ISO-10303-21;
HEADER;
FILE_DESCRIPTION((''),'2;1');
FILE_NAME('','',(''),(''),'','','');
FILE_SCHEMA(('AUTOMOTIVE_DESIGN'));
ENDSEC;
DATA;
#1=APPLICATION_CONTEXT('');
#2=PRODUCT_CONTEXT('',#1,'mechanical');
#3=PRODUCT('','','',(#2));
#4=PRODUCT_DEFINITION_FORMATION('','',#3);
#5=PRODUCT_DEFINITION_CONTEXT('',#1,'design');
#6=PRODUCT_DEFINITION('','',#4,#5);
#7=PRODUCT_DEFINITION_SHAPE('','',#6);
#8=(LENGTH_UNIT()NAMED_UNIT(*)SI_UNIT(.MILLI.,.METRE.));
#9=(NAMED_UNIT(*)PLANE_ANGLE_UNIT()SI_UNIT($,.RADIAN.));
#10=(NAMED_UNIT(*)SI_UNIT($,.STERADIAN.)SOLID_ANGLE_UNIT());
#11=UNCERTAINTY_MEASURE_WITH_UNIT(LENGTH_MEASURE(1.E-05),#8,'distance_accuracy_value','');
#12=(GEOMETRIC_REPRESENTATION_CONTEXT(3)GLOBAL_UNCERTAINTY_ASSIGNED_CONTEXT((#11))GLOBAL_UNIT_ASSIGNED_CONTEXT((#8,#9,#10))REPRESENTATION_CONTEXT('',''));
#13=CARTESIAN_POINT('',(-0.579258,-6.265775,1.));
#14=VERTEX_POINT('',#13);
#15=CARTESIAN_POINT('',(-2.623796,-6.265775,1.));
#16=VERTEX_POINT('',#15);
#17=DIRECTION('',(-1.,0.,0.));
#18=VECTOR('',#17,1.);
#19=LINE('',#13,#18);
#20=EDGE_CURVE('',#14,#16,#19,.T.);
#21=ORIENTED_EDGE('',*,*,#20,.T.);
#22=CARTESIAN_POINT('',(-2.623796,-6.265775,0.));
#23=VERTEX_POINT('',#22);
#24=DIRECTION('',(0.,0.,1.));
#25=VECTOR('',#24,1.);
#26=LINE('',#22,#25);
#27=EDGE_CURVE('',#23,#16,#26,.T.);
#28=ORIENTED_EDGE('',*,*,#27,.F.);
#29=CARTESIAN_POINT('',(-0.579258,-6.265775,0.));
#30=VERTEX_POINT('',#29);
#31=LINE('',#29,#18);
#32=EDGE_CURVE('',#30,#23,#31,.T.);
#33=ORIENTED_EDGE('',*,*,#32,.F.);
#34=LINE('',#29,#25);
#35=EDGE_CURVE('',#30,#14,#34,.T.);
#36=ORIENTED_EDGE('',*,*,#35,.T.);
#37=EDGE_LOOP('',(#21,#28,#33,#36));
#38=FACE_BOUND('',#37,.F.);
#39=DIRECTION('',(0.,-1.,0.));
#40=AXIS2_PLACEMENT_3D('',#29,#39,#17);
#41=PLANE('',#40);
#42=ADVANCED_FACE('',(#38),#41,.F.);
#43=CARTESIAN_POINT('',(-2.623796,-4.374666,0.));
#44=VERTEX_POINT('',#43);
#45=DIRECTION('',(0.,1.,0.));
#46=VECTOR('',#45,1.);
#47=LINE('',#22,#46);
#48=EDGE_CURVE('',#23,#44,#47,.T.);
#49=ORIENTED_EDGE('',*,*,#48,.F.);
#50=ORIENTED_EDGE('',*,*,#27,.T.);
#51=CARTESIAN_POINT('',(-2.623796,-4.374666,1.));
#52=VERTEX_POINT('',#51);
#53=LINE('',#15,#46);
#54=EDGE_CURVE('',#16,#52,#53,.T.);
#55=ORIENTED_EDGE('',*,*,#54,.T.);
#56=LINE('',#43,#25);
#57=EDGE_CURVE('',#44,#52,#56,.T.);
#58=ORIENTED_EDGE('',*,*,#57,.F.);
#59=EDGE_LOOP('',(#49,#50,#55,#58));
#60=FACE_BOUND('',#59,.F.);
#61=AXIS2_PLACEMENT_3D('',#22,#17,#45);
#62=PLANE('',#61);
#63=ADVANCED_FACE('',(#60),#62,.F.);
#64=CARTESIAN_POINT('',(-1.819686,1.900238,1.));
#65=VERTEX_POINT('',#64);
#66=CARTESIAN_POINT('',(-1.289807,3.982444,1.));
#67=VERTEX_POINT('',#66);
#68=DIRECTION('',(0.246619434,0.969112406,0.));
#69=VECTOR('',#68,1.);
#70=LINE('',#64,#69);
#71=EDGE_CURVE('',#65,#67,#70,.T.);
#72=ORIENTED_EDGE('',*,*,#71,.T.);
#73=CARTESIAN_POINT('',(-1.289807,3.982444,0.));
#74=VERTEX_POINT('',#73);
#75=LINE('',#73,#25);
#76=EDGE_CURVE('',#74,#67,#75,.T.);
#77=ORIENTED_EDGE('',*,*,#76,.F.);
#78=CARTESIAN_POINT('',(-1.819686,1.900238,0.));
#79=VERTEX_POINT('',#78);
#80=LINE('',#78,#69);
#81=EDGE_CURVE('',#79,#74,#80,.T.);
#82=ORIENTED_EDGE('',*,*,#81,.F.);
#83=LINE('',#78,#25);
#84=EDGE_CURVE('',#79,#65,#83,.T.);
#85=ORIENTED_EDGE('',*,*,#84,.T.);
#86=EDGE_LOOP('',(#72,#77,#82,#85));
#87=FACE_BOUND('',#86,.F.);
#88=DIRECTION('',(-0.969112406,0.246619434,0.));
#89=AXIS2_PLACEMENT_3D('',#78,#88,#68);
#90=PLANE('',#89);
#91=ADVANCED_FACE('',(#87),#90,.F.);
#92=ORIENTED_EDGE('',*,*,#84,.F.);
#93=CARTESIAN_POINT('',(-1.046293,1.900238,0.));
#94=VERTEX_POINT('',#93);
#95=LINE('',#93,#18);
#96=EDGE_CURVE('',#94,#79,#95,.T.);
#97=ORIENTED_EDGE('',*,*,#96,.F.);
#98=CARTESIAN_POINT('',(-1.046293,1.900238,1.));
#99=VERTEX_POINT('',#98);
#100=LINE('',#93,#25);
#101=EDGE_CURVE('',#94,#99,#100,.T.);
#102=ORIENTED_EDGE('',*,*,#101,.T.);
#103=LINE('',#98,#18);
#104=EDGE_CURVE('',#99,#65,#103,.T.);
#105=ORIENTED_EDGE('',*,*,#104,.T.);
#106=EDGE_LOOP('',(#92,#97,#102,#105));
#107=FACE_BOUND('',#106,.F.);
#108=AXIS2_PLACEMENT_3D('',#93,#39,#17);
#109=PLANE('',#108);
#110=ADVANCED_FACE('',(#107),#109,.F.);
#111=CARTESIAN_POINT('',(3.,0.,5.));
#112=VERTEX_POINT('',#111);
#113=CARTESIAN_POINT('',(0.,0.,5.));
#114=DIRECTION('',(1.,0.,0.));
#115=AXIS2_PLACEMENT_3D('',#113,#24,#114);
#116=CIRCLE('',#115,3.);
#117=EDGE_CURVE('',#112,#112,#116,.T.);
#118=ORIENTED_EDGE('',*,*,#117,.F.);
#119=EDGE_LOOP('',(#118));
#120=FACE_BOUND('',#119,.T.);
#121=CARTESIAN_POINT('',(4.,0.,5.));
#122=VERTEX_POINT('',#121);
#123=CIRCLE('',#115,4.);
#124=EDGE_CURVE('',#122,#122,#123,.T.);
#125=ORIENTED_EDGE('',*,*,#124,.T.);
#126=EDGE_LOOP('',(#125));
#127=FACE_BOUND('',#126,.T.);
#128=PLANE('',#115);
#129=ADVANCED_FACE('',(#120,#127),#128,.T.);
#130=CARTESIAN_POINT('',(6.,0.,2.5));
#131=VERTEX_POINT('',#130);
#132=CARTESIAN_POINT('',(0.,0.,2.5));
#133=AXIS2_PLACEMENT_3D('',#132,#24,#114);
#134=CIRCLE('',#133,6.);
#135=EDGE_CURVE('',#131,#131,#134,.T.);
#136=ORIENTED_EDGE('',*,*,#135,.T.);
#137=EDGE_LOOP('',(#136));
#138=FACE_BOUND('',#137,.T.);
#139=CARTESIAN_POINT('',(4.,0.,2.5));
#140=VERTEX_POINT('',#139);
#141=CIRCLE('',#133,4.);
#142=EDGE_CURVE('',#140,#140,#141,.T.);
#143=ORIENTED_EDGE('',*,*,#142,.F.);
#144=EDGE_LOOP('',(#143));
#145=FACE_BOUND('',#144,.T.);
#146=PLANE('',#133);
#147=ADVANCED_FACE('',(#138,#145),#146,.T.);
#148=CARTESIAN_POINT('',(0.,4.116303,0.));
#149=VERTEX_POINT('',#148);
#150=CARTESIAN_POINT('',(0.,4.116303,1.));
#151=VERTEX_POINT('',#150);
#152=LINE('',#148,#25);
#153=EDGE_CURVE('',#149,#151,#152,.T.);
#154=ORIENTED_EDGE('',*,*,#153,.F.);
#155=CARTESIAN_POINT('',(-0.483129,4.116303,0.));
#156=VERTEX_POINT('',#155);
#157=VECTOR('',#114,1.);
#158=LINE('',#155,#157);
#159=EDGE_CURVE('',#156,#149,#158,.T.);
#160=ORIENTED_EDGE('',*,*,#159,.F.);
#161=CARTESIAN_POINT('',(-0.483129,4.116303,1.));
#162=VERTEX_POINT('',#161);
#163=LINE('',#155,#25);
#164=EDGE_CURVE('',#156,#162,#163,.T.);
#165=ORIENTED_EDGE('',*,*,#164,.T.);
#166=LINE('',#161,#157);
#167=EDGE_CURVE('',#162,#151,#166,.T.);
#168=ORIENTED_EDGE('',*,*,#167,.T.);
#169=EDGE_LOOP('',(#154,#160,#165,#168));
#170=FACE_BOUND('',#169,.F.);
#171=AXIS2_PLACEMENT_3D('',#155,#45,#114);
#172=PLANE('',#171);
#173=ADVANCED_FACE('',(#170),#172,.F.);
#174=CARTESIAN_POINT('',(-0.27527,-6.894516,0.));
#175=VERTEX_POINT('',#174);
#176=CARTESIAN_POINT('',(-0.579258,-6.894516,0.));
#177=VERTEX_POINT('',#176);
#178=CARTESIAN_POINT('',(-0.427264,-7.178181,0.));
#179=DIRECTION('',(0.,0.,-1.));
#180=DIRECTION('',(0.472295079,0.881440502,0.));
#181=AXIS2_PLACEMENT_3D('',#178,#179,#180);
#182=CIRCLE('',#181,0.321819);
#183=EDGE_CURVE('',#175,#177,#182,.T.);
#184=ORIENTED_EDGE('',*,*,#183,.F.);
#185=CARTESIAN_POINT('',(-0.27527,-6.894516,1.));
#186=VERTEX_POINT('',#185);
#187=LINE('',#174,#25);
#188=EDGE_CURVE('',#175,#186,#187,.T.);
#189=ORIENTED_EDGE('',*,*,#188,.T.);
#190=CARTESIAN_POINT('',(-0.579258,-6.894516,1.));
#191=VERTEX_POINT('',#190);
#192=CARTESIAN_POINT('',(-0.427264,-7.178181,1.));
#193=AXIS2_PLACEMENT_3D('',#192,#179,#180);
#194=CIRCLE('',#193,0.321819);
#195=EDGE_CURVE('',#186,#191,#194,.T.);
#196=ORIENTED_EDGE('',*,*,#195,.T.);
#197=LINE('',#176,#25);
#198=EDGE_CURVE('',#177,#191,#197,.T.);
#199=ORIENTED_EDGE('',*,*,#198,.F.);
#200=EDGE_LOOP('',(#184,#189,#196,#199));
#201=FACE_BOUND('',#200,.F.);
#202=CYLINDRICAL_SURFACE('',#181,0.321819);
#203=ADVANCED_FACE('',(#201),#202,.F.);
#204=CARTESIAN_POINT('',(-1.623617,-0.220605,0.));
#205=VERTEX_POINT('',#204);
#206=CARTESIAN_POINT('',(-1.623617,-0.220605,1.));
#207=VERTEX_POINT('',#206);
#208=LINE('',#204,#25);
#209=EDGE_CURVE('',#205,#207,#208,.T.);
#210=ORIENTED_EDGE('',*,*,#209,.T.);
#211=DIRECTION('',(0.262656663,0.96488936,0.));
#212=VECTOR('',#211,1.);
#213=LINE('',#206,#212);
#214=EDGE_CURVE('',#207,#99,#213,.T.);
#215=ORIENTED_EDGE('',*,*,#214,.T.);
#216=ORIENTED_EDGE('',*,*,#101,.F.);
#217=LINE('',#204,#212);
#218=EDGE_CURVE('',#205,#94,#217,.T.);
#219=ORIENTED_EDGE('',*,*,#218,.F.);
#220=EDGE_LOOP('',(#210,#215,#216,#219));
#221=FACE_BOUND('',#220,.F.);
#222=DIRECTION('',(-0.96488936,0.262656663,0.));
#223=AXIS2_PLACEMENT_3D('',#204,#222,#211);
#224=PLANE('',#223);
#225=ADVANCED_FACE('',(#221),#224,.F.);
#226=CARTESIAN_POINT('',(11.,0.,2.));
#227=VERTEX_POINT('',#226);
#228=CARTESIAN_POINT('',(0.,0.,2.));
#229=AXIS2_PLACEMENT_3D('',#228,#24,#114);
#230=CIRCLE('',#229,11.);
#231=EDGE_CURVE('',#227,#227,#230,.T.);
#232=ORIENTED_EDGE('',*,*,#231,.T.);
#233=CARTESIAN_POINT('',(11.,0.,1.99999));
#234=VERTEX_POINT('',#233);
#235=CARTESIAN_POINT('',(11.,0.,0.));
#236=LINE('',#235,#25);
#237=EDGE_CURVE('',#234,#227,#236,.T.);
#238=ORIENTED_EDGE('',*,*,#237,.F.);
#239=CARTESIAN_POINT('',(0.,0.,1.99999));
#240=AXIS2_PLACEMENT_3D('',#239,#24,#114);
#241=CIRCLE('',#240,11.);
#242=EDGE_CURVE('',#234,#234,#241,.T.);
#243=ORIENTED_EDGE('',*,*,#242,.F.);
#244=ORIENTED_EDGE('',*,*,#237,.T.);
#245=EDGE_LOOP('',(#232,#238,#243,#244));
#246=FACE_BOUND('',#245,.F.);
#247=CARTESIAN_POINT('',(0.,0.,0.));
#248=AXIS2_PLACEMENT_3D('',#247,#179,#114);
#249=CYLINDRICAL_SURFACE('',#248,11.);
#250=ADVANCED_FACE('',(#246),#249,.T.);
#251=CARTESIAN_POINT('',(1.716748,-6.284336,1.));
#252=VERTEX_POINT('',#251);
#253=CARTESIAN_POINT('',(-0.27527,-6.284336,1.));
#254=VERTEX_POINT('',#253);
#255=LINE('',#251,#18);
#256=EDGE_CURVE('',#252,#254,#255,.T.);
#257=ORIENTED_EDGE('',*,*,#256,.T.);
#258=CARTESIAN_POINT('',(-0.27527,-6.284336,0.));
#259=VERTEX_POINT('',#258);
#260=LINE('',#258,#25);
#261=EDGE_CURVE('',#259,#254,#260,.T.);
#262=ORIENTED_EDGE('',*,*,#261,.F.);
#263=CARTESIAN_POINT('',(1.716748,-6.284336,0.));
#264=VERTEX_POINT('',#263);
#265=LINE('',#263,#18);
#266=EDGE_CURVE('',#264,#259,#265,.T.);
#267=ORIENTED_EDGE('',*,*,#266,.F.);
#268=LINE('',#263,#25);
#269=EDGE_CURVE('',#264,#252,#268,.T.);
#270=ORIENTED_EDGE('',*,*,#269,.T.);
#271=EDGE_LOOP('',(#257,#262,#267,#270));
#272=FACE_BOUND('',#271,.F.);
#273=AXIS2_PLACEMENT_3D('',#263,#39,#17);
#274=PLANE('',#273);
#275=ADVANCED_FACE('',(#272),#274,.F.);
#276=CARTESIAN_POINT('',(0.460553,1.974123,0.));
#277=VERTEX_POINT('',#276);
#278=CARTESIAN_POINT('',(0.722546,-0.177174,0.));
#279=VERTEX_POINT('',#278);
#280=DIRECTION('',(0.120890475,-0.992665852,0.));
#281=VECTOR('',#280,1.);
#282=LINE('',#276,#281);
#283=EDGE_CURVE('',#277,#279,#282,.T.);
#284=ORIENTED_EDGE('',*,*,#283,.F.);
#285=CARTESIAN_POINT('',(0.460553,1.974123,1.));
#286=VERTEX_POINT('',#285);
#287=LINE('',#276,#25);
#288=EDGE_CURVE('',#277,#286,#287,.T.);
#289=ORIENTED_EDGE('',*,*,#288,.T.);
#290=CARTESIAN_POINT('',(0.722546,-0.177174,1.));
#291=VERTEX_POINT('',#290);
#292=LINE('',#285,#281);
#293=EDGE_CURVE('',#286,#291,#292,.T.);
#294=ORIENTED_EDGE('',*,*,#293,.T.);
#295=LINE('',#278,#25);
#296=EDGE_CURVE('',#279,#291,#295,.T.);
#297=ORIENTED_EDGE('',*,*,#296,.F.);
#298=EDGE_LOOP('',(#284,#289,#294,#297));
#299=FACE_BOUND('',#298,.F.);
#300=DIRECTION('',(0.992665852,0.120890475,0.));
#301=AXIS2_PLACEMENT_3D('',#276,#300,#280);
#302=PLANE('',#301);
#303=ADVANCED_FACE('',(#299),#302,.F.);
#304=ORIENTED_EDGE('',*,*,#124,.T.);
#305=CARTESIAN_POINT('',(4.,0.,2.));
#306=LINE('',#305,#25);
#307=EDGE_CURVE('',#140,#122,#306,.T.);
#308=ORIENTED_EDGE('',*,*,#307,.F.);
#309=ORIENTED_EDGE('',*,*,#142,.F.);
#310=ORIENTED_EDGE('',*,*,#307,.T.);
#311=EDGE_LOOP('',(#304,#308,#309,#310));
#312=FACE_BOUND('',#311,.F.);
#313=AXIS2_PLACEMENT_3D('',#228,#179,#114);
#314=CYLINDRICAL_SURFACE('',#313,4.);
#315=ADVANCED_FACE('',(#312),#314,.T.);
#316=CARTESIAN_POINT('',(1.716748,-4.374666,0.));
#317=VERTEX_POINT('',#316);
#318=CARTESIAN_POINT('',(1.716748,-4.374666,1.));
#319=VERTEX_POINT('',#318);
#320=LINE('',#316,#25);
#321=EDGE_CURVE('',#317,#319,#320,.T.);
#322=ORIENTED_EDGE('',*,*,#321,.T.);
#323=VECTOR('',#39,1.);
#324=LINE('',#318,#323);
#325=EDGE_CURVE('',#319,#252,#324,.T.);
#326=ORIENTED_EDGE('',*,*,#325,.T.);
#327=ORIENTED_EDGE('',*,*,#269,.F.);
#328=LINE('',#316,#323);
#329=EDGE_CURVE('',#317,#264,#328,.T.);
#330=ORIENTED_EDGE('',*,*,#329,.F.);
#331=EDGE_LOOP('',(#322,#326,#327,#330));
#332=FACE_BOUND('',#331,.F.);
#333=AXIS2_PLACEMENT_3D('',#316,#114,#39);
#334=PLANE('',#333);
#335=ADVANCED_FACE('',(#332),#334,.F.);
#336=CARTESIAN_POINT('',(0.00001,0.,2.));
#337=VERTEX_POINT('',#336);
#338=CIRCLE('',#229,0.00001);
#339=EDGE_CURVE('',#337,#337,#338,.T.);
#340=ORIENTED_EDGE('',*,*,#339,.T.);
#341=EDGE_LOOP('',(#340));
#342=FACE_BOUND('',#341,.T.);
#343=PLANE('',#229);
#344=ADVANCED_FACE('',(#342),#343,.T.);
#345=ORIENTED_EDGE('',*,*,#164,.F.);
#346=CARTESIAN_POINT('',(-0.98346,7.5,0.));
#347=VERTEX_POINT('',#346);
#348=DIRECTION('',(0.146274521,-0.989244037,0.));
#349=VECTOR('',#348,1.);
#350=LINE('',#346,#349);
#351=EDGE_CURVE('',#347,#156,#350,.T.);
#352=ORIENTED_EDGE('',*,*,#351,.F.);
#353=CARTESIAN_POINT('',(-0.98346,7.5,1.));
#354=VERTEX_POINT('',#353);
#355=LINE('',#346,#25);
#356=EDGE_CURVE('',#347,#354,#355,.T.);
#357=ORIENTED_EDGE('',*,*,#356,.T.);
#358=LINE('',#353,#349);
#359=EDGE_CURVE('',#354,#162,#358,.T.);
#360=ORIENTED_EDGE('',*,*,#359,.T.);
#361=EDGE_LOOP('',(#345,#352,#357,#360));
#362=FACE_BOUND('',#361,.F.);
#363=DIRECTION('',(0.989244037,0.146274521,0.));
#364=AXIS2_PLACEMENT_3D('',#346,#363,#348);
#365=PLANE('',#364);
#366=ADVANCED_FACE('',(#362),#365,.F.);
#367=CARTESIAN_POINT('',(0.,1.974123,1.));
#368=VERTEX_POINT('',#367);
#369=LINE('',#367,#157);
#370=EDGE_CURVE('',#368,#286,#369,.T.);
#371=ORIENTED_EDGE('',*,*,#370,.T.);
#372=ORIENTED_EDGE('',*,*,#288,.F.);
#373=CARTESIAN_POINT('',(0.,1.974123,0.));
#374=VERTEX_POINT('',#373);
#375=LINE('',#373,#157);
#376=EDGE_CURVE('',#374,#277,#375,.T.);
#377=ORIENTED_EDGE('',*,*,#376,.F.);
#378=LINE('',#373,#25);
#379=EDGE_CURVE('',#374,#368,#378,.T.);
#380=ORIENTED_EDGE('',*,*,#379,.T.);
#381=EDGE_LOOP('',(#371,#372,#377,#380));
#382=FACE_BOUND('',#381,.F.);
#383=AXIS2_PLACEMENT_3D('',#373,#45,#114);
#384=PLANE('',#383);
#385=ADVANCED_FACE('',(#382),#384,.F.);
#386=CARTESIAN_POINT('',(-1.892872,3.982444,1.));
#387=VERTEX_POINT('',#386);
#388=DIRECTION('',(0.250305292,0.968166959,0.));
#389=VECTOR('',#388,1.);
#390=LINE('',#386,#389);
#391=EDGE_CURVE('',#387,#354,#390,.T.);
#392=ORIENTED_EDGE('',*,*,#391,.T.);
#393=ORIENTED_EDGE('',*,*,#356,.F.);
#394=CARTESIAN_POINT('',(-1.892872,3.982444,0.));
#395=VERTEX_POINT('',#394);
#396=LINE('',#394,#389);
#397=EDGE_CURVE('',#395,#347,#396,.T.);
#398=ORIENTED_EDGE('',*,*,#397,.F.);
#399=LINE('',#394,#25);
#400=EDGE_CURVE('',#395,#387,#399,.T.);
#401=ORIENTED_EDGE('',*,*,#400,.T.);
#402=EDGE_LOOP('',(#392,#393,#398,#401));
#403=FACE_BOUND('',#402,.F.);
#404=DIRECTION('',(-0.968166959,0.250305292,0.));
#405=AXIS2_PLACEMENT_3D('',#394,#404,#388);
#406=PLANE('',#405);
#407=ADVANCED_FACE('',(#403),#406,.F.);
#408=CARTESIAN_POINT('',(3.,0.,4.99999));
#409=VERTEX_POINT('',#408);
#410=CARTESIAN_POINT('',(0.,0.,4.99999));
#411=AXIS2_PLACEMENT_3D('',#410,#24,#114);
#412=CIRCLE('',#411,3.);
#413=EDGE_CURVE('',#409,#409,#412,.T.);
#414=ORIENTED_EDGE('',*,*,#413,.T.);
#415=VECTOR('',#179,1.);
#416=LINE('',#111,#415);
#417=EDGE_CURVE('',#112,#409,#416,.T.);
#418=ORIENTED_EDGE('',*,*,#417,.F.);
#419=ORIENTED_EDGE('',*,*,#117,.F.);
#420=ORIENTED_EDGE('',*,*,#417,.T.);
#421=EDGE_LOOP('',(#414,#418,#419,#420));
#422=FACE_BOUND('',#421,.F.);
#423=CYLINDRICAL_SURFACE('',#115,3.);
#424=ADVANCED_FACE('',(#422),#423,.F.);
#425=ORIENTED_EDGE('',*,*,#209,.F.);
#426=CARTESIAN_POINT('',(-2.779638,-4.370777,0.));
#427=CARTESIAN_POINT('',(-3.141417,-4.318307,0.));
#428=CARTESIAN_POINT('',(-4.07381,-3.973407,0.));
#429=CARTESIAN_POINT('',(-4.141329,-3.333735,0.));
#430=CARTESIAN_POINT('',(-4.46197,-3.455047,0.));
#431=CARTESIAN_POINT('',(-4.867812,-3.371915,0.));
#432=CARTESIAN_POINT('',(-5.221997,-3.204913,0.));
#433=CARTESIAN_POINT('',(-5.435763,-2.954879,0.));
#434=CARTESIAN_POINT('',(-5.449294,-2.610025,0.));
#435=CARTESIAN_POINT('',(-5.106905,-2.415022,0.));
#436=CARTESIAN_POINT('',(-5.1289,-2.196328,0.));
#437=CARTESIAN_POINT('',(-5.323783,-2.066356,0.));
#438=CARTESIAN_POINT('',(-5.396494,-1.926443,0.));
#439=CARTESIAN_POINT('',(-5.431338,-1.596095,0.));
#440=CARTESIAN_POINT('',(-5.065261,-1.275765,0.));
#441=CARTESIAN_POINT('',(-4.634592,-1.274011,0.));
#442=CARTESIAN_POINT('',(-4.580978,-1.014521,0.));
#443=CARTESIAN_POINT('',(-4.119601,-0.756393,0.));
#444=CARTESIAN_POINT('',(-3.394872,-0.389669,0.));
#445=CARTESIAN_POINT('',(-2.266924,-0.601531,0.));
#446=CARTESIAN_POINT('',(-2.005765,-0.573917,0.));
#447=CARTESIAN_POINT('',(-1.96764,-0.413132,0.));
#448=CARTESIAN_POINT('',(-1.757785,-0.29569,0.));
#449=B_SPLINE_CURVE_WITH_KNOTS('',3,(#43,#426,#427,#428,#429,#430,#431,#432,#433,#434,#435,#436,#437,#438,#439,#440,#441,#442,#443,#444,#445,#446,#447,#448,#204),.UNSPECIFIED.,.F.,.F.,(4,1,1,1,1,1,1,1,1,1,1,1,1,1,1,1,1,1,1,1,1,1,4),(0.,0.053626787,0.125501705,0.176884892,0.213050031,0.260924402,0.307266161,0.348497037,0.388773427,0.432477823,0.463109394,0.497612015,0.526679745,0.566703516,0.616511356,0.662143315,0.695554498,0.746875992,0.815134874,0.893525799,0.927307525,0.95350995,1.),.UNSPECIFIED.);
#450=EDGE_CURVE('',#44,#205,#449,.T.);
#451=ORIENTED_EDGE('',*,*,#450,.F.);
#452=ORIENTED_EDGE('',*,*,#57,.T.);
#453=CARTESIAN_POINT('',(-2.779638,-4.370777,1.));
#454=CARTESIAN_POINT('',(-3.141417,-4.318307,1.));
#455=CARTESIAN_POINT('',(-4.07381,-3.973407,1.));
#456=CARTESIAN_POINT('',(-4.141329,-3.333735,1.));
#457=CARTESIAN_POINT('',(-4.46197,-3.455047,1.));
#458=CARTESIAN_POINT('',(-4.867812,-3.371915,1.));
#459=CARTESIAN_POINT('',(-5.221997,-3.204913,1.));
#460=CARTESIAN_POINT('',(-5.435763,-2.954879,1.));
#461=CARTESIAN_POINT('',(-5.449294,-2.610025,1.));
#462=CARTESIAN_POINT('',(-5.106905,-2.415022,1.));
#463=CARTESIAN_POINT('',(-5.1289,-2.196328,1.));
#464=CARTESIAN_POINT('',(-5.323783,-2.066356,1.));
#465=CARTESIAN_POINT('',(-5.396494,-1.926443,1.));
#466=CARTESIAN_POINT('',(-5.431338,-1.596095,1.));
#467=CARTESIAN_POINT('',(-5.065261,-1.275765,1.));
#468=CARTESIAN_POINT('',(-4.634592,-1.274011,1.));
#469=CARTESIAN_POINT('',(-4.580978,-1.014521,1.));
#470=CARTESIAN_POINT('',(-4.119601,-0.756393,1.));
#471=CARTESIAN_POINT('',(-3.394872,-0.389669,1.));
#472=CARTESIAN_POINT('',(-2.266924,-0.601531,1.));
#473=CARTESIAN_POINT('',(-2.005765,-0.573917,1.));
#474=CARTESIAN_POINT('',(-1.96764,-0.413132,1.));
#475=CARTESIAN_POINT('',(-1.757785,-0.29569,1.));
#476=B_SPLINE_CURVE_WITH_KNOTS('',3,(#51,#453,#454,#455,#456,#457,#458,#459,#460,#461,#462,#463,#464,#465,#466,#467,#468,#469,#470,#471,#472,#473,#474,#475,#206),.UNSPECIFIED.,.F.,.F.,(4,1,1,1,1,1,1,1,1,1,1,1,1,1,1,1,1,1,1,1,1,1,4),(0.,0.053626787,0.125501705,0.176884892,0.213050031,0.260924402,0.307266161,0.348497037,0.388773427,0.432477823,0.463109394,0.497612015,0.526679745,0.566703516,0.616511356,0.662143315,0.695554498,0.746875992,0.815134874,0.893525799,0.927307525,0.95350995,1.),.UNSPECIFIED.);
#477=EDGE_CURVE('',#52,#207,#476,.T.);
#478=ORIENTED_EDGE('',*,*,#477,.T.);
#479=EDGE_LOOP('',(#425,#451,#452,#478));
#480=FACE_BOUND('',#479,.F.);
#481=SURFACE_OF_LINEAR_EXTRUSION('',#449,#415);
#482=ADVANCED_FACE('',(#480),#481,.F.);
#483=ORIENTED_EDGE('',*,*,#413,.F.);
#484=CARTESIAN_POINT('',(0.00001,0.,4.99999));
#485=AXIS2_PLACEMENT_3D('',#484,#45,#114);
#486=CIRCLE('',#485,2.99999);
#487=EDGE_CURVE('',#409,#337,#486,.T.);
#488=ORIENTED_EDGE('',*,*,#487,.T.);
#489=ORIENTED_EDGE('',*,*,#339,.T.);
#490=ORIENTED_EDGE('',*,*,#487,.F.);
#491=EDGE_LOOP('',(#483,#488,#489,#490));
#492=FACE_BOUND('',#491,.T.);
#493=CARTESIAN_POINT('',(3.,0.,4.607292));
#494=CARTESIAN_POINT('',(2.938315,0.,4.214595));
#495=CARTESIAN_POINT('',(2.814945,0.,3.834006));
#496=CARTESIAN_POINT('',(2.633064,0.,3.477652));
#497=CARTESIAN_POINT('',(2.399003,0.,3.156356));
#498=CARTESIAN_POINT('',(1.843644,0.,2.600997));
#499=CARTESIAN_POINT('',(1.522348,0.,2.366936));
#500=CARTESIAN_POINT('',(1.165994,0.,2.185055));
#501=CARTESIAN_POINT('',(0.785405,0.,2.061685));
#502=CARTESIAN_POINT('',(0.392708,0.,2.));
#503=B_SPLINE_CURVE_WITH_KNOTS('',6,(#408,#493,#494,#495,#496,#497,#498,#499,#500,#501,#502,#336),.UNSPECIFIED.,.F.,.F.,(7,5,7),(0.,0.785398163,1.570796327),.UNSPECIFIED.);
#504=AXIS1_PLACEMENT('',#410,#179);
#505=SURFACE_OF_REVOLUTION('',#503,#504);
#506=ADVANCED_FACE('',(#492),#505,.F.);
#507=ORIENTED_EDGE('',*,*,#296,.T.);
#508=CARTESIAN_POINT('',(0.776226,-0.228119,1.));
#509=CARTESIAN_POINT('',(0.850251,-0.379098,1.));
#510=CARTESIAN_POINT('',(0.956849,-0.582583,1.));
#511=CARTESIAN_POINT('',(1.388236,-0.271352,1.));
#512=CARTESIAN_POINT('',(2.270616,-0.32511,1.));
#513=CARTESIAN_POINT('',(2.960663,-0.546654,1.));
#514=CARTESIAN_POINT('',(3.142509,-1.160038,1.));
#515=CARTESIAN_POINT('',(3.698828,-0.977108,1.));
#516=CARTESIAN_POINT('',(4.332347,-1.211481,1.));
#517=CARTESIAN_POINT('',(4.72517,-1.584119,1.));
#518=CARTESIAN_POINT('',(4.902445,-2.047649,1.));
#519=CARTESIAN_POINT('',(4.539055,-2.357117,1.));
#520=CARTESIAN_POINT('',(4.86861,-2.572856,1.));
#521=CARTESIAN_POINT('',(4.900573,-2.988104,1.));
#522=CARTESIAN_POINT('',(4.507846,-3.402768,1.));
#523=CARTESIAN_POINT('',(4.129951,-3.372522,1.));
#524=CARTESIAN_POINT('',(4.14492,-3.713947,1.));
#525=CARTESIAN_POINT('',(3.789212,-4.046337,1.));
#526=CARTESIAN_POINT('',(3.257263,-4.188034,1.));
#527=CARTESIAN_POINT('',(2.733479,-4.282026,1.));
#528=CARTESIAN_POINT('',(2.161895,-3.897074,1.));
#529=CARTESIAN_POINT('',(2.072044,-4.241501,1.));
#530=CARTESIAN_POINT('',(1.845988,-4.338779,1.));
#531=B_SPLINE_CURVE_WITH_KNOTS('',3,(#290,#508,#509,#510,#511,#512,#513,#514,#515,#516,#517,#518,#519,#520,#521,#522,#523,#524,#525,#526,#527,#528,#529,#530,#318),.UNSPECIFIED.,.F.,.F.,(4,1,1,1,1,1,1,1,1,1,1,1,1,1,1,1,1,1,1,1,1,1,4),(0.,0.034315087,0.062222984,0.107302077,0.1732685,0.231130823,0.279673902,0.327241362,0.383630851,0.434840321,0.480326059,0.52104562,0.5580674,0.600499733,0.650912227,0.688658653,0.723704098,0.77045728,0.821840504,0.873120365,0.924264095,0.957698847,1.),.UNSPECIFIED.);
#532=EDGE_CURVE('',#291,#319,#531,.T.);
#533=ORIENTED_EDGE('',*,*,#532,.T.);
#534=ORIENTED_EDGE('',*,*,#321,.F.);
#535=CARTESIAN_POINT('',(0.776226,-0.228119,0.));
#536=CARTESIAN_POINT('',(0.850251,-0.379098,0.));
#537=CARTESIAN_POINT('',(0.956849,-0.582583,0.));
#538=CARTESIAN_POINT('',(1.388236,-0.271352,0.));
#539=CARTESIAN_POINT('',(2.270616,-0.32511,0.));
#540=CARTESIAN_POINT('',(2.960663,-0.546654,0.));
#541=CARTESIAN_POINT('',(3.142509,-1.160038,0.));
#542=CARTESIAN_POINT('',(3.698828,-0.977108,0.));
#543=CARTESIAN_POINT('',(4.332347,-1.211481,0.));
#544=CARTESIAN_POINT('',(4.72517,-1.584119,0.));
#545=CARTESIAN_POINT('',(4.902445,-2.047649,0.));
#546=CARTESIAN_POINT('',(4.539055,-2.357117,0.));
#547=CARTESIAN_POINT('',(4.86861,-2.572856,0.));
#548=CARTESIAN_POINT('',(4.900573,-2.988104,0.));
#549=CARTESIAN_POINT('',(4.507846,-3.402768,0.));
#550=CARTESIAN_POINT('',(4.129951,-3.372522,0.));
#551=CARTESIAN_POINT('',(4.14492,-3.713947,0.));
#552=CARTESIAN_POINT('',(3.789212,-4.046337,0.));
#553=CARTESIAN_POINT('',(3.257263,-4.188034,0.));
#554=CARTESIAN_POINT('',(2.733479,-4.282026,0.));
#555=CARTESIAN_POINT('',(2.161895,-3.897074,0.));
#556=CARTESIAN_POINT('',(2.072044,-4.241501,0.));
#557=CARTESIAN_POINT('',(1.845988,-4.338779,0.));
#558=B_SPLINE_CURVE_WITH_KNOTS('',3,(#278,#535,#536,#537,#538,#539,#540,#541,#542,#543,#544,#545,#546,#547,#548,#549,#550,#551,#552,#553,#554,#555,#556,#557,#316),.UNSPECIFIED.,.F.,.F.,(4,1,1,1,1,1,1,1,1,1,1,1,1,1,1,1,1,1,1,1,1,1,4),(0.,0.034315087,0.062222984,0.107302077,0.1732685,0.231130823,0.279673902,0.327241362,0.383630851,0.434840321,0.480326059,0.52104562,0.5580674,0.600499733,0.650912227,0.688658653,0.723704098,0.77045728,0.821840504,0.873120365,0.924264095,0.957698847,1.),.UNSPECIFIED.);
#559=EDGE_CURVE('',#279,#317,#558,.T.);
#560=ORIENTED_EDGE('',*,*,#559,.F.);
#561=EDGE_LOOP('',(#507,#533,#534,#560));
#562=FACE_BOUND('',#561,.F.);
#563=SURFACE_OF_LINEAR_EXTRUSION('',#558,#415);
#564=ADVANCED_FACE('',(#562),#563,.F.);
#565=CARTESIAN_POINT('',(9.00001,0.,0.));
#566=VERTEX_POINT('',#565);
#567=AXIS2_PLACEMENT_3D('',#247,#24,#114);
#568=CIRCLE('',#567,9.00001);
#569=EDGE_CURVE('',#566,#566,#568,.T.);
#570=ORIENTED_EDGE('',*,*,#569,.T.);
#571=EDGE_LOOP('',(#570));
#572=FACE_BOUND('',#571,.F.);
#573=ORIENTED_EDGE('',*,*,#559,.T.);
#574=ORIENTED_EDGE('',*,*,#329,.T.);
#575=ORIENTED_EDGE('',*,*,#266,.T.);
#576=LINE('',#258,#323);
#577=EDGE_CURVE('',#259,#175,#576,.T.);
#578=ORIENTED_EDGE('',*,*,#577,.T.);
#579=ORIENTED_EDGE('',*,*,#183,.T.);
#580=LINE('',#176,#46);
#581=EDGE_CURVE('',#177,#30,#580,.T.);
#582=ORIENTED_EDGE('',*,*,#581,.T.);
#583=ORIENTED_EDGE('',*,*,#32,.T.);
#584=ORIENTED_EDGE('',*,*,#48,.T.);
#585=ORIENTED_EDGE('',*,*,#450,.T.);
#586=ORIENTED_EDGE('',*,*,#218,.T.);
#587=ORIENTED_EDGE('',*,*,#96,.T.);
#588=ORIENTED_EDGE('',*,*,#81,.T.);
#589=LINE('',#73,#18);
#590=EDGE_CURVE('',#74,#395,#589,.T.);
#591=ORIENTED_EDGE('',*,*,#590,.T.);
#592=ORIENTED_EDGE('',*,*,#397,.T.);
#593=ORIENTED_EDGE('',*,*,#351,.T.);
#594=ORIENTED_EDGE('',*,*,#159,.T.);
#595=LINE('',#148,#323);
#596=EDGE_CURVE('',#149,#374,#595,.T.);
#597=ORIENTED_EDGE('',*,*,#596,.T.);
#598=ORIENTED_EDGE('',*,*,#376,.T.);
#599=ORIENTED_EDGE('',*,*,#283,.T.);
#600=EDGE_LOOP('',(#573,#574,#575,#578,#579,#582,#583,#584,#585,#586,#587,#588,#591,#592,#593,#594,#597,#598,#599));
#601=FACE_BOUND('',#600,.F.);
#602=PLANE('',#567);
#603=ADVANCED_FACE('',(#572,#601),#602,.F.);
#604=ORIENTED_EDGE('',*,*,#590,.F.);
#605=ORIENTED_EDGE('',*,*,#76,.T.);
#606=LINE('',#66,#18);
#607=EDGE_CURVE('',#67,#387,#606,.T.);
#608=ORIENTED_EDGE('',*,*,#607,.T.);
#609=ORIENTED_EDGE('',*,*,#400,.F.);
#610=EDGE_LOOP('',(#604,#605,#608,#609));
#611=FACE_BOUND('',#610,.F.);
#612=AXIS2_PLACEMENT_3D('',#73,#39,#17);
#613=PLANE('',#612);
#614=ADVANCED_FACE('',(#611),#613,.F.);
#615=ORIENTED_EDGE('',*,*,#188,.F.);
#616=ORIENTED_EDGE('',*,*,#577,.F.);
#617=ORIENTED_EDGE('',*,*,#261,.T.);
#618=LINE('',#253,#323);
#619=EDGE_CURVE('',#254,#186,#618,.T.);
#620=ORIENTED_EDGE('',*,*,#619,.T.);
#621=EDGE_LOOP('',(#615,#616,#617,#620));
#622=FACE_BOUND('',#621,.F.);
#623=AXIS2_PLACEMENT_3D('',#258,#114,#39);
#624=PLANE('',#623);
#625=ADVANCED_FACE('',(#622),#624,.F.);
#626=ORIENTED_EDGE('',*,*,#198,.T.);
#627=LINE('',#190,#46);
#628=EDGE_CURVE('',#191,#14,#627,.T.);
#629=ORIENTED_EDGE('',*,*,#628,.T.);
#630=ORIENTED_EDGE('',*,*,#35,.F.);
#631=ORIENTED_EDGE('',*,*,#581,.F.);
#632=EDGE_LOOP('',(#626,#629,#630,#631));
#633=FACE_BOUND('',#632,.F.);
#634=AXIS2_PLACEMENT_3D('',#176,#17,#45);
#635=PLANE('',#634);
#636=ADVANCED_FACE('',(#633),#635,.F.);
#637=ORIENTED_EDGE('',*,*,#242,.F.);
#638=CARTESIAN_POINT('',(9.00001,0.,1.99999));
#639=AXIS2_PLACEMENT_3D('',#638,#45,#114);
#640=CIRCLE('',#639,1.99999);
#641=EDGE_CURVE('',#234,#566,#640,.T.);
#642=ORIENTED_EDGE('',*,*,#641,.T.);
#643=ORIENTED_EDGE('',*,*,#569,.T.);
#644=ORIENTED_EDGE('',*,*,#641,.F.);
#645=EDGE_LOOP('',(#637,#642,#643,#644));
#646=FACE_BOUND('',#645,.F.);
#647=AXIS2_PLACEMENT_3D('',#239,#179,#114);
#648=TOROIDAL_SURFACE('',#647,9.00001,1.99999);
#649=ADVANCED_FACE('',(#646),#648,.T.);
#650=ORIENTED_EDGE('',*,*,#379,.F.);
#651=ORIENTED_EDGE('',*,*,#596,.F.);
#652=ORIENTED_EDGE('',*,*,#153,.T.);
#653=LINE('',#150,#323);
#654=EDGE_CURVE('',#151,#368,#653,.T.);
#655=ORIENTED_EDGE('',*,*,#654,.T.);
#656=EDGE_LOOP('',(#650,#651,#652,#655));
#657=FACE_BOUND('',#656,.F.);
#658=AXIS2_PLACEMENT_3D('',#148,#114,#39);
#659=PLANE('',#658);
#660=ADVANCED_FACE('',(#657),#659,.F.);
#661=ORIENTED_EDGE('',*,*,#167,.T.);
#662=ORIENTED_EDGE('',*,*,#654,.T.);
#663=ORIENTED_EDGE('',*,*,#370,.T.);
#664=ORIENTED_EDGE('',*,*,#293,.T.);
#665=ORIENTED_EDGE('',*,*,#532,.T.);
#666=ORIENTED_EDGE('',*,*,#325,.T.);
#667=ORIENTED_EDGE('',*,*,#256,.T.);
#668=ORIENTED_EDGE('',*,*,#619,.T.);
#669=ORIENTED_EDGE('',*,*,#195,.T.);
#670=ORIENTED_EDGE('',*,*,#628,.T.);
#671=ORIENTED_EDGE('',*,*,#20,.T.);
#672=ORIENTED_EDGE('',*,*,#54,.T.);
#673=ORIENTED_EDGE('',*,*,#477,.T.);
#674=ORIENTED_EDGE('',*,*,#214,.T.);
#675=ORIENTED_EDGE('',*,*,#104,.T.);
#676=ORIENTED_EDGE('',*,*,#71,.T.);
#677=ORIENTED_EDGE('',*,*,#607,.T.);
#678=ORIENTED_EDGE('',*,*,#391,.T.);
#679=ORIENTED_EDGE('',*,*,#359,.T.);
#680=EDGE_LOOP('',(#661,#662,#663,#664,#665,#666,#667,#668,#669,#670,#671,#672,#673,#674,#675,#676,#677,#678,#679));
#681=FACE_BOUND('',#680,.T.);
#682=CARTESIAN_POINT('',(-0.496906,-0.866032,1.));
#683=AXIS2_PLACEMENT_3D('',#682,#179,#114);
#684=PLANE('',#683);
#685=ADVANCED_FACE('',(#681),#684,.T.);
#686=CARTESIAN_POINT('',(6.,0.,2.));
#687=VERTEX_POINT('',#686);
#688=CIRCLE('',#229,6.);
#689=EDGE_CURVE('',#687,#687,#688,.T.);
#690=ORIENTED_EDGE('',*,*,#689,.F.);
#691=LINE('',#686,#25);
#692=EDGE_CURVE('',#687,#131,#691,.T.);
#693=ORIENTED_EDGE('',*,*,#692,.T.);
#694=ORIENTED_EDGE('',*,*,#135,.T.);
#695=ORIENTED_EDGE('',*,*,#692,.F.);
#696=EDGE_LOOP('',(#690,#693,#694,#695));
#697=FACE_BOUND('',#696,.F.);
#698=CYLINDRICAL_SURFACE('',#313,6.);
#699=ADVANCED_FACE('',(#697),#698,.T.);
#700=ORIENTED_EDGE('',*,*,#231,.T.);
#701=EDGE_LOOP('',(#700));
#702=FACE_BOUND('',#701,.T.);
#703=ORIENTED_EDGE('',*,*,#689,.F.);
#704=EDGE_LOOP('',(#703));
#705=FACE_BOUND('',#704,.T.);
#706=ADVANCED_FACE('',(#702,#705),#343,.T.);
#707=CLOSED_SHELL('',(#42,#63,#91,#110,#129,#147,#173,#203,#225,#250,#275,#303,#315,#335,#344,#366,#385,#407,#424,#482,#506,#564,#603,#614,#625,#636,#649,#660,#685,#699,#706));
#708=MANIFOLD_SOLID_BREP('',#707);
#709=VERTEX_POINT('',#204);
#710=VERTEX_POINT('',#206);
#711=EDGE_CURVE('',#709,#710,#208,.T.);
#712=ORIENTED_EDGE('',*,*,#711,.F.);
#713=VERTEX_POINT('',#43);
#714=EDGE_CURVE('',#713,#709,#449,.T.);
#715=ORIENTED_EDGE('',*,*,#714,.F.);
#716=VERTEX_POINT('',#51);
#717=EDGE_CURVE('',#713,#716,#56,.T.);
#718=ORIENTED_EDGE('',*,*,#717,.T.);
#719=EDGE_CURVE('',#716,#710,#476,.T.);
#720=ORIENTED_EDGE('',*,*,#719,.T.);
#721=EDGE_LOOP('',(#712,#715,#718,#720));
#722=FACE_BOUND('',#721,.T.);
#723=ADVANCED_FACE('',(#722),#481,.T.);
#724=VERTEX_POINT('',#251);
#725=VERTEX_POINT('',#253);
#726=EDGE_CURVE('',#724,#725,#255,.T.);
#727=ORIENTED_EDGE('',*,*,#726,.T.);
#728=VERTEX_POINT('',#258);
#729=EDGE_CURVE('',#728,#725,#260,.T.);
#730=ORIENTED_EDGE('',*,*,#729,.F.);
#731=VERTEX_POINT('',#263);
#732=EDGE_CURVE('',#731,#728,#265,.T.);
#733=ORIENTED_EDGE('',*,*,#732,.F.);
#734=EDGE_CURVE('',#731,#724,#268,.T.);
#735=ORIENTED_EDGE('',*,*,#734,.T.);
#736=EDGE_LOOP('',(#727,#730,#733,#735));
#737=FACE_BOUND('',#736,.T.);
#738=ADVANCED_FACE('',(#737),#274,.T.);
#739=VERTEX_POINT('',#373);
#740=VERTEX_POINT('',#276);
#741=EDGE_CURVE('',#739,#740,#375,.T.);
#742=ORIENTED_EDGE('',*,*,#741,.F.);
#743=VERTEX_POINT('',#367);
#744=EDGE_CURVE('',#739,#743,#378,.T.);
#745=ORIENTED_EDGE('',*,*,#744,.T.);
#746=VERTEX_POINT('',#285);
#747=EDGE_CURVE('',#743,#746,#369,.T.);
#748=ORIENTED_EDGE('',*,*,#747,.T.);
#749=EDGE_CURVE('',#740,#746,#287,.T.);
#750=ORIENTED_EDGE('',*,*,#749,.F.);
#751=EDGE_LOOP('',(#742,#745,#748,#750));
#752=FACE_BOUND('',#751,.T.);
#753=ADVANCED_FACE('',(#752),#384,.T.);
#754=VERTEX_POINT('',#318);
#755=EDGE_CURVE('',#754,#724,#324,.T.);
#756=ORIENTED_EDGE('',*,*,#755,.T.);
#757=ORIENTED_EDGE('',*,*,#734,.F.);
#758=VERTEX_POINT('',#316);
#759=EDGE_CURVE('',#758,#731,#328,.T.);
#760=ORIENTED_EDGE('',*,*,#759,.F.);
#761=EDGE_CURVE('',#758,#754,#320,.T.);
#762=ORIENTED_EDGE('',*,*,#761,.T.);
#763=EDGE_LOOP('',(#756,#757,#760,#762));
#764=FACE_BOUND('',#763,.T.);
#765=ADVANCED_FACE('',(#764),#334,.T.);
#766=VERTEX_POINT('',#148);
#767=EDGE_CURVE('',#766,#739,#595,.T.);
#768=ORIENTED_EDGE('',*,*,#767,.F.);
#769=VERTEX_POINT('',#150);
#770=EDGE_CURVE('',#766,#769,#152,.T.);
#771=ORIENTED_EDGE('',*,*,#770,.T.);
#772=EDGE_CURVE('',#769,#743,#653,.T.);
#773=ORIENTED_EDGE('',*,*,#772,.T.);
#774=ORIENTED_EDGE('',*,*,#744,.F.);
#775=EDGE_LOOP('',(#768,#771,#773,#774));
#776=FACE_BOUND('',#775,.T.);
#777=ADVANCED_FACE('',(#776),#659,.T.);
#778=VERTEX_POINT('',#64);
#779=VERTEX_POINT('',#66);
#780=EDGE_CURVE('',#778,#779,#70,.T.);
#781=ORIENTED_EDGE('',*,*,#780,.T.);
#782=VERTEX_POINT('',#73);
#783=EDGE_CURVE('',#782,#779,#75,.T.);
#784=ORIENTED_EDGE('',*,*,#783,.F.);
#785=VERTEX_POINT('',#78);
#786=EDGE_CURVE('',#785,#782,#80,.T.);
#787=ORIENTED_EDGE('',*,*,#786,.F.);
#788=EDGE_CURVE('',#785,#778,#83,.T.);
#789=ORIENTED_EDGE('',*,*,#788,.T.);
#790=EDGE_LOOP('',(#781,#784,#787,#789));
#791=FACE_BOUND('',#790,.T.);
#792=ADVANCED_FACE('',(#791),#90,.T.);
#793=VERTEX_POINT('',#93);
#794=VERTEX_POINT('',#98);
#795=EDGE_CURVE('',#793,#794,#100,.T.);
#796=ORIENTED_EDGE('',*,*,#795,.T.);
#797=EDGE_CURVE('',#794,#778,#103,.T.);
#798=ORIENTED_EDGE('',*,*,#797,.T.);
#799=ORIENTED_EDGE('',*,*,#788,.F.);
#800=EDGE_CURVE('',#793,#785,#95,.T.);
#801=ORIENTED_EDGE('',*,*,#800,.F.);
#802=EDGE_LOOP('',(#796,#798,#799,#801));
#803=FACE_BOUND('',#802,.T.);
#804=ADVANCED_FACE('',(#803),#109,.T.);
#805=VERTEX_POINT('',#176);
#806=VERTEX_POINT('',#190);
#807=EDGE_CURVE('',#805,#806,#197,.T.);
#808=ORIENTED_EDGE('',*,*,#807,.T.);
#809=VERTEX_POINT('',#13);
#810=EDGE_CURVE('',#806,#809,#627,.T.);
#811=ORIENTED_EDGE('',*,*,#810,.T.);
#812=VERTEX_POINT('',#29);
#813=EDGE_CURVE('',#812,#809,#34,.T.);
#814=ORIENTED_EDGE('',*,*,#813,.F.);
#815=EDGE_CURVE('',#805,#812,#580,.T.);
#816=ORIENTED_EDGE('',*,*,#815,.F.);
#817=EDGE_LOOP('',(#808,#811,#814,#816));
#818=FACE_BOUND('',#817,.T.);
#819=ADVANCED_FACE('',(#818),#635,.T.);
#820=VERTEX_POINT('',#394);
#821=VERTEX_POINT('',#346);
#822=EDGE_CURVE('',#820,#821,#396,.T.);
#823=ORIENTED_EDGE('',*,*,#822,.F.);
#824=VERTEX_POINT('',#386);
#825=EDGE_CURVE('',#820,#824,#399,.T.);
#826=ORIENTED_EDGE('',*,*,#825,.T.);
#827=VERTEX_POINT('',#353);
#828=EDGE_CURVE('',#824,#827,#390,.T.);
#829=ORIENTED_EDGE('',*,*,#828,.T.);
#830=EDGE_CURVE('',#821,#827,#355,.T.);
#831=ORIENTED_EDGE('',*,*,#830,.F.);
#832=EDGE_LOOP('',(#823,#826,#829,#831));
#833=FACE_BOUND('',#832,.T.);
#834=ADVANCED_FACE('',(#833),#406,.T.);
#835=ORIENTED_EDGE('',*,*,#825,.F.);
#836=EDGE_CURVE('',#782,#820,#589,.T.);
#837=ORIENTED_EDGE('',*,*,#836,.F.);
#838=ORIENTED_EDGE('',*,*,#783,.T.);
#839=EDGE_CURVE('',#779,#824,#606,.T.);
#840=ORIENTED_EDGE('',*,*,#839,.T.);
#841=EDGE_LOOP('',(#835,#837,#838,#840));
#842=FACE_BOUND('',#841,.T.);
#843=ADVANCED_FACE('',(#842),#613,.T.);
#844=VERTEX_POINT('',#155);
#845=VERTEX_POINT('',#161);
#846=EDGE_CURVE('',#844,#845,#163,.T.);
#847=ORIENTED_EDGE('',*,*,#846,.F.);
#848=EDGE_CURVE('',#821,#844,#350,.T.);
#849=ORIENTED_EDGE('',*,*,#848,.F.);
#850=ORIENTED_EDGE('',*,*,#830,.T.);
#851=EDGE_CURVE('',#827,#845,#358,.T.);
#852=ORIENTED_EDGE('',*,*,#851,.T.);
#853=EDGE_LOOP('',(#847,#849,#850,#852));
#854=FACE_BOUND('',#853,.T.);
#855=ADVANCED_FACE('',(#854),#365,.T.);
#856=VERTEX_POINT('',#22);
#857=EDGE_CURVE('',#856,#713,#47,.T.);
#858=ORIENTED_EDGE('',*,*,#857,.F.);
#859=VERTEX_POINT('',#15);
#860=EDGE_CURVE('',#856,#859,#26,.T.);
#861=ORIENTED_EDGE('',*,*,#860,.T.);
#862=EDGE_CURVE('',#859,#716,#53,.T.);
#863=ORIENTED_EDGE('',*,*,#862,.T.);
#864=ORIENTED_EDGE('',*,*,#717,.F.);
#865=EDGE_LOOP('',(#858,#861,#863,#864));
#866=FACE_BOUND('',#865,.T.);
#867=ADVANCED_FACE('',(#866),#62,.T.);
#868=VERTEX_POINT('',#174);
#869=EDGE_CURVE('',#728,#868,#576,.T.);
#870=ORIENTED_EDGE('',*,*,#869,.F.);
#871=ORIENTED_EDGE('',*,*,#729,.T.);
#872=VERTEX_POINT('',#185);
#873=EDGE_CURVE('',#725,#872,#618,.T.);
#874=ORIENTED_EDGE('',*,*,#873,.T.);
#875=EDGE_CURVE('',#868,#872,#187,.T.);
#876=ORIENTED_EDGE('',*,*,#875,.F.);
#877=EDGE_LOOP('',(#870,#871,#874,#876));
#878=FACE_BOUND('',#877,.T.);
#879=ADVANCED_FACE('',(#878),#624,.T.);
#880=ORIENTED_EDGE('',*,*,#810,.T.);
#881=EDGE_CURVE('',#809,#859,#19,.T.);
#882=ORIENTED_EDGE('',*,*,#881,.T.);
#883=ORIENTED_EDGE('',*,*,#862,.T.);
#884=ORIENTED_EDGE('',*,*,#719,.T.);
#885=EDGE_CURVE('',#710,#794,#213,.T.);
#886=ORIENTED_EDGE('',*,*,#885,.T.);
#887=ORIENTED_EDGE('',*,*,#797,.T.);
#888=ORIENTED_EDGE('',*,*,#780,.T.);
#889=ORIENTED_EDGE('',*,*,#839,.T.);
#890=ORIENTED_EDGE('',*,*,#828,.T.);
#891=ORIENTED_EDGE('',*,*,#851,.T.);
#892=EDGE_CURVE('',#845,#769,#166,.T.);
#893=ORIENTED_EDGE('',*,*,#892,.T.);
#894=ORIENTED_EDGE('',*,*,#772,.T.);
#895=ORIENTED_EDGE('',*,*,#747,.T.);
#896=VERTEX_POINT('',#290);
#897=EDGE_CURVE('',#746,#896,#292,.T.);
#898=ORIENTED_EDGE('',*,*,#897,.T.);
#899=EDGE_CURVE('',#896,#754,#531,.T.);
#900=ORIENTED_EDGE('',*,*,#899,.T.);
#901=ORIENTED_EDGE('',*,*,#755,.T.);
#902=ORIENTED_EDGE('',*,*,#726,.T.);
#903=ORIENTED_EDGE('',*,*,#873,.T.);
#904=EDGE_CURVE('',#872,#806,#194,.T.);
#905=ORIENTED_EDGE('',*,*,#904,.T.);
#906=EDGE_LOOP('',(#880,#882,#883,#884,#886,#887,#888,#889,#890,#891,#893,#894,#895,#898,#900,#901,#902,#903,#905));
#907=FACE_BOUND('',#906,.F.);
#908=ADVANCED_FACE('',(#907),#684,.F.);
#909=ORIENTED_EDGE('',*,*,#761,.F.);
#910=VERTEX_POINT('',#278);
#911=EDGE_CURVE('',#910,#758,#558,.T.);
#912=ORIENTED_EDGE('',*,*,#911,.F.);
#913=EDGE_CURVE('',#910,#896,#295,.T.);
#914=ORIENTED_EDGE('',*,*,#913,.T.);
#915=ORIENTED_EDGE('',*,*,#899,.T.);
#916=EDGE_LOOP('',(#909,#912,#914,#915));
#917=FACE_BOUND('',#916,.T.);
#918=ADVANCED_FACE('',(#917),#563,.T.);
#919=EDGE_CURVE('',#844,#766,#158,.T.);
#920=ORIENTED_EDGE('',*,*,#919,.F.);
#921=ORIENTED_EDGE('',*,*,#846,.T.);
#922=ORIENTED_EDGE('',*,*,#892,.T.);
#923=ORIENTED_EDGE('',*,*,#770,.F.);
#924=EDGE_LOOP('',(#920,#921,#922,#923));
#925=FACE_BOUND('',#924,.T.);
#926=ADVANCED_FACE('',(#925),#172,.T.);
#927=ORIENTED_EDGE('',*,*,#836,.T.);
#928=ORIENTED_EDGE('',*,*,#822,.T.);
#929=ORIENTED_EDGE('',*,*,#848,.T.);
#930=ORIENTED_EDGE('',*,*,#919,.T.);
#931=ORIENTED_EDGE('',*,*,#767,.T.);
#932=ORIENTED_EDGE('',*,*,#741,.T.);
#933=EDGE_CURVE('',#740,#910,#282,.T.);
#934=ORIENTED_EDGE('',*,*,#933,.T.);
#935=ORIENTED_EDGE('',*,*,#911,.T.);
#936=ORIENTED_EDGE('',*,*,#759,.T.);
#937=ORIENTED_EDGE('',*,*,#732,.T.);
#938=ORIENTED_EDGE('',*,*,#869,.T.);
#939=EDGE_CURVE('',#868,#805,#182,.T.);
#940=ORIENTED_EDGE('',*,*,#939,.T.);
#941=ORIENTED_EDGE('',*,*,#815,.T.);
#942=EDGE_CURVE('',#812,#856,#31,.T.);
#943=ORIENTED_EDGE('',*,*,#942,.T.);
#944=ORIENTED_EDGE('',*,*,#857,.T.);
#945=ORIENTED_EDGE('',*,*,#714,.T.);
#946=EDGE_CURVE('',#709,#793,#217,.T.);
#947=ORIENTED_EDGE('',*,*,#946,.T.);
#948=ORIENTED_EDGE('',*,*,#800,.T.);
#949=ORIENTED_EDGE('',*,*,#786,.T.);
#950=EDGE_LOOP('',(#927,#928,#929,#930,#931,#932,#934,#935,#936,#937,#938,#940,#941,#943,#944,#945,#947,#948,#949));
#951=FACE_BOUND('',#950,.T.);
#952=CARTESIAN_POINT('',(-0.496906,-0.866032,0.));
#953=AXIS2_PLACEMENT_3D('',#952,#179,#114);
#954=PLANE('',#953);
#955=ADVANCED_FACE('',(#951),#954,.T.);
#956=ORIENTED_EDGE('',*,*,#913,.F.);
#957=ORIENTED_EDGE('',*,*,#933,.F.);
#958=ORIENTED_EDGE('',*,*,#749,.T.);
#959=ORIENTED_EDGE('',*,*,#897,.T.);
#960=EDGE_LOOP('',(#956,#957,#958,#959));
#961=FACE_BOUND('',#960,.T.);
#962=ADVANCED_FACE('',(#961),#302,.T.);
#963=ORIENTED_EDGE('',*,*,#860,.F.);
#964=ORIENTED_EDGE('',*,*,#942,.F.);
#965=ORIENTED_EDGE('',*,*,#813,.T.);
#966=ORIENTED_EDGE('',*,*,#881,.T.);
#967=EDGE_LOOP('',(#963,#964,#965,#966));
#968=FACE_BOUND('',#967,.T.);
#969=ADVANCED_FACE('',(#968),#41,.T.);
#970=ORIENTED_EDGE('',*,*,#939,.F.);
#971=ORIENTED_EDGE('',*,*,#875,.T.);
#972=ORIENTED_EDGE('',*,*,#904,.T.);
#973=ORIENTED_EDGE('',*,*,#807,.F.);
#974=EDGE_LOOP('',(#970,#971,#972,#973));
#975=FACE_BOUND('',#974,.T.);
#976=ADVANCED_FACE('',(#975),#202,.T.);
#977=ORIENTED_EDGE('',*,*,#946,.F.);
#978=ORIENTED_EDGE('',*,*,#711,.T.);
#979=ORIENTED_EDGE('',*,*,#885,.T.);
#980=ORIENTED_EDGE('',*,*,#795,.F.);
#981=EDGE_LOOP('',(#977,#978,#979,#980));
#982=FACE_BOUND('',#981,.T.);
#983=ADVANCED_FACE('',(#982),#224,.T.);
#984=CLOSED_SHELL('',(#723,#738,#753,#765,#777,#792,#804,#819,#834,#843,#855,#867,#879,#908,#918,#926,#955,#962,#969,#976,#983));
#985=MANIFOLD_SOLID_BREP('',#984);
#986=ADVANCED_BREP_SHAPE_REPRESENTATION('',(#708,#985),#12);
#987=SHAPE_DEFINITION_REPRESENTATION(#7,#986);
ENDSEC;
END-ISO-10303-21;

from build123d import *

# Parameters (mm, degrees)
F0_R      = 11
F1_DEPTH  = 2
F2_R      = 4
F3_DEPTH  = 3
F4_R      = 1.99999
F6_DEPTH  = 1
F8_R      = 3
F9_DEPTH  = 3
F10_R     = 2.99999
F11_R     = 6
F11_R_2   = 4
F12_DEPTH = 0.5


# Not quite as in the source:
# - a fillet or chamfer is up to 0.001 mm smaller than in the source, because OpenCascade refuses the exact size


with BuildPart() as f1:
    # F0 (on Top) → F1 (new body)
    with BuildSketch(Plane.XY):
        Circle(F0_R)
    extrude(amount=F1_DEPTH)

    # F2 (on face) → F3 (join)
    with BuildSketch(Plane.XY.offset(2)):
        Circle(F2_R)
    extrude(amount=F3_DEPTH)

    # F4 (radius 2 in the source; OpenCascade refuses exactly that, so slightly less here)
    f4_edges = [f1.edges().sort_by_distance(p)[0] for p in [
        (-11, 0, 0),
    ]]
    fillet(f4_edges, radius=F4_R)


with BuildPart() as f6:
    # F5 (on face) → F6 (new body)
    with BuildSketch(Plane(origin=(0, 0, 0), x_dir=(1, 0, 0), z_dir=(0, 0, -1))):
        with BuildLine():
            Line((-1.8928718055, -3.9824442938), (-0.9834596422, -7.5))
            Line((-0.9834596422, -7.5), (-0.4831294937, -4.1163032874))
            Line((-0.4831294937, -4.1163032874), (0, -4.1163032874))
            Line((0, -4.1163032874), (0, -1.9741227152))
            Line((0, -1.9741227152), (0.4605528779, -1.9741227152))
            Line((0.4605528779, -1.9741227152), (0.7225455958, 0.177173526))
            add(Edge.make_bspline(
                [(0.7225455958, 0.177173526), (0.7762262629, 0.2281189128), (0.8502513972, 0.379098319), (0.9568493801, 0.5825831672), (1.3882358596, 0.2713520899), (2.2706158575, 0.325109657), (2.9606627237, 0.5466543673), (3.1425092039, 1.1600376151), (3.6988276955, 0.9771075427), (4.3323473067, 1.21148059), (4.7251701582, 1.5841194333), (4.902445248, 2.0476494201), (4.5390546862, 2.3571166495), (4.868610307, 2.5728562245), (4.9005730312, 2.9881043818), (4.5078459511, 3.402767623), (4.1299512308, 3.3725223179), (4.1449199962, 3.7139472996), (3.7892118892, 4.0463374379), (3.2572627056, 4.1880335908), (2.7334793793, 4.2820261048), (2.1618953926, 3.897074129), (2.0720441471, 4.2415005639), (1.8459876198, 4.3387790504), (1.7167479964, 4.3746663272)],
                knots=[0, 0, 0, 0, 0.034315087, 0.0622229844, 0.1073020773, 0.1732684996, 0.2311308228, 0.279673902, 0.3272413623, 0.3836308507, 0.4348403206, 0.480326059, 0.5210456198, 0.5580673996, 0.6004997328, 0.6509122273, 0.6886586533, 0.7237040981, 0.7704572796, 0.821840504, 0.8731203646, 0.9242640946, 0.9576988474, 1, 1, 1, 1], degree=3))
            Line((1.7167479964, 4.3746663272), (1.7167479964, 6.2843358159))
            Line((1.7167479964, 6.2843358159), (-0.2752703829, 6.2843358159))
            Line((-0.2752703829, 6.2843358159), (-0.2752703829, 6.894516015))
            ThreePointArc((-0.2752703829, 6.894516015), (-0.4272640848, 7.5), (-0.5792577867, 6.894516015))
            Line((-0.5792577867, 6.894516015), (-0.5792577867, 6.2657745569))
            Line((-0.5792577867, 6.2657745569), (-2.6237959974, 6.2657745569))
            Line((-2.6237959974, 6.2657745569), (-2.6237959974, 4.3746663272))
            add(Edge.make_bspline(
                [(-2.6237959974, 4.3746663272), (-2.7796377607, 4.370777365), (-3.1414168436, 4.3183073448), (-4.073810314, 3.973406918), (-4.1413287087, 3.333735406), (-4.4619695731, 3.4550470658), (-4.8678120533, 3.3719150759), (-5.2219971301, 3.2049126023), (-5.4357633862, 2.9548787394), (-5.44929439, 2.6100254951), (-5.106905436, 2.4150215688), (-5.1288996618, 2.1963283303), (-5.3237832819, 2.0663564119), (-5.3964938936, 1.9264425574), (-5.4313375817, 1.5960952954), (-5.0652612539, 1.2757646634), (-4.6345917016, 1.2740107743), (-4.5809776708, 1.0145212389), (-4.1196007189, 0.7563932071), (-3.3948718138, 0.3896693064), (-2.2669242123, 0.6015313813), (-2.0057648306, 0.5739172824), (-1.9676401478, 0.4131318116), (-1.7577845477, 0.2956896244), (-1.6236169031, 0.2206049394)],
                knots=[0, 0, 0, 0, 0.0536267868, 0.125501705, 0.176884892, 0.2130500311, 0.2609244015, 0.3072661614, 0.3484970374, 0.388773427, 0.4324778226, 0.463109394, 0.4976120146, 0.5266797454, 0.5667035162, 0.6165113557, 0.6621433152, 0.6955544981, 0.7468759924, 0.8151348745, 0.8935257992, 0.9273075254, 0.9535099497, 1, 1, 1, 1], degree=3))
            Line((-1.6236169031, 0.2206049394), (-1.0462932987, -1.9002375193))
            Line((-1.0462932987, -1.9002375193), (-1.8196863821, -1.9002375193))
            Line((-1.8196863821, -1.9002375193), (-1.2898070272, -3.9824442938))
            Line((-1.2898070272, -3.9824442938), (-1.8928718055, -3.9824442938))
        make_face()
    extrude(amount=-F6_DEPTH)


with BuildPart() as f1_1:
    add(f1.part)

    # F7: cut F6
    add(f6.part, mode=Mode.SUBTRACT)

    # F8 (on face) → F9 (cut, through all)
    with BuildSketch(Plane.XY.offset(5)):
        Circle(F8_R)
    extrude(amount=-F9_DEPTH, mode=Mode.SUBTRACT)

    # F10 (radius 3 in the source; OpenCascade refuses exactly that, so slightly less here)
    f10_edges = [f1_1.edges().sort_by_distance(p)[0] for p in [
        (-3, 0, 2),
    ]]
    fillet(f10_edges, radius=F10_R)

    # F11 (on face) → F12 (join)
    with BuildSketch(Plane.XY.offset(2)):
        Circle(F11_R)
        Circle(F11_R_2, mode=Mode.SUBTRACT)
    extrude(amount=F12_DEPTH)


solid = Compound([f6.part, f1_1.part])
